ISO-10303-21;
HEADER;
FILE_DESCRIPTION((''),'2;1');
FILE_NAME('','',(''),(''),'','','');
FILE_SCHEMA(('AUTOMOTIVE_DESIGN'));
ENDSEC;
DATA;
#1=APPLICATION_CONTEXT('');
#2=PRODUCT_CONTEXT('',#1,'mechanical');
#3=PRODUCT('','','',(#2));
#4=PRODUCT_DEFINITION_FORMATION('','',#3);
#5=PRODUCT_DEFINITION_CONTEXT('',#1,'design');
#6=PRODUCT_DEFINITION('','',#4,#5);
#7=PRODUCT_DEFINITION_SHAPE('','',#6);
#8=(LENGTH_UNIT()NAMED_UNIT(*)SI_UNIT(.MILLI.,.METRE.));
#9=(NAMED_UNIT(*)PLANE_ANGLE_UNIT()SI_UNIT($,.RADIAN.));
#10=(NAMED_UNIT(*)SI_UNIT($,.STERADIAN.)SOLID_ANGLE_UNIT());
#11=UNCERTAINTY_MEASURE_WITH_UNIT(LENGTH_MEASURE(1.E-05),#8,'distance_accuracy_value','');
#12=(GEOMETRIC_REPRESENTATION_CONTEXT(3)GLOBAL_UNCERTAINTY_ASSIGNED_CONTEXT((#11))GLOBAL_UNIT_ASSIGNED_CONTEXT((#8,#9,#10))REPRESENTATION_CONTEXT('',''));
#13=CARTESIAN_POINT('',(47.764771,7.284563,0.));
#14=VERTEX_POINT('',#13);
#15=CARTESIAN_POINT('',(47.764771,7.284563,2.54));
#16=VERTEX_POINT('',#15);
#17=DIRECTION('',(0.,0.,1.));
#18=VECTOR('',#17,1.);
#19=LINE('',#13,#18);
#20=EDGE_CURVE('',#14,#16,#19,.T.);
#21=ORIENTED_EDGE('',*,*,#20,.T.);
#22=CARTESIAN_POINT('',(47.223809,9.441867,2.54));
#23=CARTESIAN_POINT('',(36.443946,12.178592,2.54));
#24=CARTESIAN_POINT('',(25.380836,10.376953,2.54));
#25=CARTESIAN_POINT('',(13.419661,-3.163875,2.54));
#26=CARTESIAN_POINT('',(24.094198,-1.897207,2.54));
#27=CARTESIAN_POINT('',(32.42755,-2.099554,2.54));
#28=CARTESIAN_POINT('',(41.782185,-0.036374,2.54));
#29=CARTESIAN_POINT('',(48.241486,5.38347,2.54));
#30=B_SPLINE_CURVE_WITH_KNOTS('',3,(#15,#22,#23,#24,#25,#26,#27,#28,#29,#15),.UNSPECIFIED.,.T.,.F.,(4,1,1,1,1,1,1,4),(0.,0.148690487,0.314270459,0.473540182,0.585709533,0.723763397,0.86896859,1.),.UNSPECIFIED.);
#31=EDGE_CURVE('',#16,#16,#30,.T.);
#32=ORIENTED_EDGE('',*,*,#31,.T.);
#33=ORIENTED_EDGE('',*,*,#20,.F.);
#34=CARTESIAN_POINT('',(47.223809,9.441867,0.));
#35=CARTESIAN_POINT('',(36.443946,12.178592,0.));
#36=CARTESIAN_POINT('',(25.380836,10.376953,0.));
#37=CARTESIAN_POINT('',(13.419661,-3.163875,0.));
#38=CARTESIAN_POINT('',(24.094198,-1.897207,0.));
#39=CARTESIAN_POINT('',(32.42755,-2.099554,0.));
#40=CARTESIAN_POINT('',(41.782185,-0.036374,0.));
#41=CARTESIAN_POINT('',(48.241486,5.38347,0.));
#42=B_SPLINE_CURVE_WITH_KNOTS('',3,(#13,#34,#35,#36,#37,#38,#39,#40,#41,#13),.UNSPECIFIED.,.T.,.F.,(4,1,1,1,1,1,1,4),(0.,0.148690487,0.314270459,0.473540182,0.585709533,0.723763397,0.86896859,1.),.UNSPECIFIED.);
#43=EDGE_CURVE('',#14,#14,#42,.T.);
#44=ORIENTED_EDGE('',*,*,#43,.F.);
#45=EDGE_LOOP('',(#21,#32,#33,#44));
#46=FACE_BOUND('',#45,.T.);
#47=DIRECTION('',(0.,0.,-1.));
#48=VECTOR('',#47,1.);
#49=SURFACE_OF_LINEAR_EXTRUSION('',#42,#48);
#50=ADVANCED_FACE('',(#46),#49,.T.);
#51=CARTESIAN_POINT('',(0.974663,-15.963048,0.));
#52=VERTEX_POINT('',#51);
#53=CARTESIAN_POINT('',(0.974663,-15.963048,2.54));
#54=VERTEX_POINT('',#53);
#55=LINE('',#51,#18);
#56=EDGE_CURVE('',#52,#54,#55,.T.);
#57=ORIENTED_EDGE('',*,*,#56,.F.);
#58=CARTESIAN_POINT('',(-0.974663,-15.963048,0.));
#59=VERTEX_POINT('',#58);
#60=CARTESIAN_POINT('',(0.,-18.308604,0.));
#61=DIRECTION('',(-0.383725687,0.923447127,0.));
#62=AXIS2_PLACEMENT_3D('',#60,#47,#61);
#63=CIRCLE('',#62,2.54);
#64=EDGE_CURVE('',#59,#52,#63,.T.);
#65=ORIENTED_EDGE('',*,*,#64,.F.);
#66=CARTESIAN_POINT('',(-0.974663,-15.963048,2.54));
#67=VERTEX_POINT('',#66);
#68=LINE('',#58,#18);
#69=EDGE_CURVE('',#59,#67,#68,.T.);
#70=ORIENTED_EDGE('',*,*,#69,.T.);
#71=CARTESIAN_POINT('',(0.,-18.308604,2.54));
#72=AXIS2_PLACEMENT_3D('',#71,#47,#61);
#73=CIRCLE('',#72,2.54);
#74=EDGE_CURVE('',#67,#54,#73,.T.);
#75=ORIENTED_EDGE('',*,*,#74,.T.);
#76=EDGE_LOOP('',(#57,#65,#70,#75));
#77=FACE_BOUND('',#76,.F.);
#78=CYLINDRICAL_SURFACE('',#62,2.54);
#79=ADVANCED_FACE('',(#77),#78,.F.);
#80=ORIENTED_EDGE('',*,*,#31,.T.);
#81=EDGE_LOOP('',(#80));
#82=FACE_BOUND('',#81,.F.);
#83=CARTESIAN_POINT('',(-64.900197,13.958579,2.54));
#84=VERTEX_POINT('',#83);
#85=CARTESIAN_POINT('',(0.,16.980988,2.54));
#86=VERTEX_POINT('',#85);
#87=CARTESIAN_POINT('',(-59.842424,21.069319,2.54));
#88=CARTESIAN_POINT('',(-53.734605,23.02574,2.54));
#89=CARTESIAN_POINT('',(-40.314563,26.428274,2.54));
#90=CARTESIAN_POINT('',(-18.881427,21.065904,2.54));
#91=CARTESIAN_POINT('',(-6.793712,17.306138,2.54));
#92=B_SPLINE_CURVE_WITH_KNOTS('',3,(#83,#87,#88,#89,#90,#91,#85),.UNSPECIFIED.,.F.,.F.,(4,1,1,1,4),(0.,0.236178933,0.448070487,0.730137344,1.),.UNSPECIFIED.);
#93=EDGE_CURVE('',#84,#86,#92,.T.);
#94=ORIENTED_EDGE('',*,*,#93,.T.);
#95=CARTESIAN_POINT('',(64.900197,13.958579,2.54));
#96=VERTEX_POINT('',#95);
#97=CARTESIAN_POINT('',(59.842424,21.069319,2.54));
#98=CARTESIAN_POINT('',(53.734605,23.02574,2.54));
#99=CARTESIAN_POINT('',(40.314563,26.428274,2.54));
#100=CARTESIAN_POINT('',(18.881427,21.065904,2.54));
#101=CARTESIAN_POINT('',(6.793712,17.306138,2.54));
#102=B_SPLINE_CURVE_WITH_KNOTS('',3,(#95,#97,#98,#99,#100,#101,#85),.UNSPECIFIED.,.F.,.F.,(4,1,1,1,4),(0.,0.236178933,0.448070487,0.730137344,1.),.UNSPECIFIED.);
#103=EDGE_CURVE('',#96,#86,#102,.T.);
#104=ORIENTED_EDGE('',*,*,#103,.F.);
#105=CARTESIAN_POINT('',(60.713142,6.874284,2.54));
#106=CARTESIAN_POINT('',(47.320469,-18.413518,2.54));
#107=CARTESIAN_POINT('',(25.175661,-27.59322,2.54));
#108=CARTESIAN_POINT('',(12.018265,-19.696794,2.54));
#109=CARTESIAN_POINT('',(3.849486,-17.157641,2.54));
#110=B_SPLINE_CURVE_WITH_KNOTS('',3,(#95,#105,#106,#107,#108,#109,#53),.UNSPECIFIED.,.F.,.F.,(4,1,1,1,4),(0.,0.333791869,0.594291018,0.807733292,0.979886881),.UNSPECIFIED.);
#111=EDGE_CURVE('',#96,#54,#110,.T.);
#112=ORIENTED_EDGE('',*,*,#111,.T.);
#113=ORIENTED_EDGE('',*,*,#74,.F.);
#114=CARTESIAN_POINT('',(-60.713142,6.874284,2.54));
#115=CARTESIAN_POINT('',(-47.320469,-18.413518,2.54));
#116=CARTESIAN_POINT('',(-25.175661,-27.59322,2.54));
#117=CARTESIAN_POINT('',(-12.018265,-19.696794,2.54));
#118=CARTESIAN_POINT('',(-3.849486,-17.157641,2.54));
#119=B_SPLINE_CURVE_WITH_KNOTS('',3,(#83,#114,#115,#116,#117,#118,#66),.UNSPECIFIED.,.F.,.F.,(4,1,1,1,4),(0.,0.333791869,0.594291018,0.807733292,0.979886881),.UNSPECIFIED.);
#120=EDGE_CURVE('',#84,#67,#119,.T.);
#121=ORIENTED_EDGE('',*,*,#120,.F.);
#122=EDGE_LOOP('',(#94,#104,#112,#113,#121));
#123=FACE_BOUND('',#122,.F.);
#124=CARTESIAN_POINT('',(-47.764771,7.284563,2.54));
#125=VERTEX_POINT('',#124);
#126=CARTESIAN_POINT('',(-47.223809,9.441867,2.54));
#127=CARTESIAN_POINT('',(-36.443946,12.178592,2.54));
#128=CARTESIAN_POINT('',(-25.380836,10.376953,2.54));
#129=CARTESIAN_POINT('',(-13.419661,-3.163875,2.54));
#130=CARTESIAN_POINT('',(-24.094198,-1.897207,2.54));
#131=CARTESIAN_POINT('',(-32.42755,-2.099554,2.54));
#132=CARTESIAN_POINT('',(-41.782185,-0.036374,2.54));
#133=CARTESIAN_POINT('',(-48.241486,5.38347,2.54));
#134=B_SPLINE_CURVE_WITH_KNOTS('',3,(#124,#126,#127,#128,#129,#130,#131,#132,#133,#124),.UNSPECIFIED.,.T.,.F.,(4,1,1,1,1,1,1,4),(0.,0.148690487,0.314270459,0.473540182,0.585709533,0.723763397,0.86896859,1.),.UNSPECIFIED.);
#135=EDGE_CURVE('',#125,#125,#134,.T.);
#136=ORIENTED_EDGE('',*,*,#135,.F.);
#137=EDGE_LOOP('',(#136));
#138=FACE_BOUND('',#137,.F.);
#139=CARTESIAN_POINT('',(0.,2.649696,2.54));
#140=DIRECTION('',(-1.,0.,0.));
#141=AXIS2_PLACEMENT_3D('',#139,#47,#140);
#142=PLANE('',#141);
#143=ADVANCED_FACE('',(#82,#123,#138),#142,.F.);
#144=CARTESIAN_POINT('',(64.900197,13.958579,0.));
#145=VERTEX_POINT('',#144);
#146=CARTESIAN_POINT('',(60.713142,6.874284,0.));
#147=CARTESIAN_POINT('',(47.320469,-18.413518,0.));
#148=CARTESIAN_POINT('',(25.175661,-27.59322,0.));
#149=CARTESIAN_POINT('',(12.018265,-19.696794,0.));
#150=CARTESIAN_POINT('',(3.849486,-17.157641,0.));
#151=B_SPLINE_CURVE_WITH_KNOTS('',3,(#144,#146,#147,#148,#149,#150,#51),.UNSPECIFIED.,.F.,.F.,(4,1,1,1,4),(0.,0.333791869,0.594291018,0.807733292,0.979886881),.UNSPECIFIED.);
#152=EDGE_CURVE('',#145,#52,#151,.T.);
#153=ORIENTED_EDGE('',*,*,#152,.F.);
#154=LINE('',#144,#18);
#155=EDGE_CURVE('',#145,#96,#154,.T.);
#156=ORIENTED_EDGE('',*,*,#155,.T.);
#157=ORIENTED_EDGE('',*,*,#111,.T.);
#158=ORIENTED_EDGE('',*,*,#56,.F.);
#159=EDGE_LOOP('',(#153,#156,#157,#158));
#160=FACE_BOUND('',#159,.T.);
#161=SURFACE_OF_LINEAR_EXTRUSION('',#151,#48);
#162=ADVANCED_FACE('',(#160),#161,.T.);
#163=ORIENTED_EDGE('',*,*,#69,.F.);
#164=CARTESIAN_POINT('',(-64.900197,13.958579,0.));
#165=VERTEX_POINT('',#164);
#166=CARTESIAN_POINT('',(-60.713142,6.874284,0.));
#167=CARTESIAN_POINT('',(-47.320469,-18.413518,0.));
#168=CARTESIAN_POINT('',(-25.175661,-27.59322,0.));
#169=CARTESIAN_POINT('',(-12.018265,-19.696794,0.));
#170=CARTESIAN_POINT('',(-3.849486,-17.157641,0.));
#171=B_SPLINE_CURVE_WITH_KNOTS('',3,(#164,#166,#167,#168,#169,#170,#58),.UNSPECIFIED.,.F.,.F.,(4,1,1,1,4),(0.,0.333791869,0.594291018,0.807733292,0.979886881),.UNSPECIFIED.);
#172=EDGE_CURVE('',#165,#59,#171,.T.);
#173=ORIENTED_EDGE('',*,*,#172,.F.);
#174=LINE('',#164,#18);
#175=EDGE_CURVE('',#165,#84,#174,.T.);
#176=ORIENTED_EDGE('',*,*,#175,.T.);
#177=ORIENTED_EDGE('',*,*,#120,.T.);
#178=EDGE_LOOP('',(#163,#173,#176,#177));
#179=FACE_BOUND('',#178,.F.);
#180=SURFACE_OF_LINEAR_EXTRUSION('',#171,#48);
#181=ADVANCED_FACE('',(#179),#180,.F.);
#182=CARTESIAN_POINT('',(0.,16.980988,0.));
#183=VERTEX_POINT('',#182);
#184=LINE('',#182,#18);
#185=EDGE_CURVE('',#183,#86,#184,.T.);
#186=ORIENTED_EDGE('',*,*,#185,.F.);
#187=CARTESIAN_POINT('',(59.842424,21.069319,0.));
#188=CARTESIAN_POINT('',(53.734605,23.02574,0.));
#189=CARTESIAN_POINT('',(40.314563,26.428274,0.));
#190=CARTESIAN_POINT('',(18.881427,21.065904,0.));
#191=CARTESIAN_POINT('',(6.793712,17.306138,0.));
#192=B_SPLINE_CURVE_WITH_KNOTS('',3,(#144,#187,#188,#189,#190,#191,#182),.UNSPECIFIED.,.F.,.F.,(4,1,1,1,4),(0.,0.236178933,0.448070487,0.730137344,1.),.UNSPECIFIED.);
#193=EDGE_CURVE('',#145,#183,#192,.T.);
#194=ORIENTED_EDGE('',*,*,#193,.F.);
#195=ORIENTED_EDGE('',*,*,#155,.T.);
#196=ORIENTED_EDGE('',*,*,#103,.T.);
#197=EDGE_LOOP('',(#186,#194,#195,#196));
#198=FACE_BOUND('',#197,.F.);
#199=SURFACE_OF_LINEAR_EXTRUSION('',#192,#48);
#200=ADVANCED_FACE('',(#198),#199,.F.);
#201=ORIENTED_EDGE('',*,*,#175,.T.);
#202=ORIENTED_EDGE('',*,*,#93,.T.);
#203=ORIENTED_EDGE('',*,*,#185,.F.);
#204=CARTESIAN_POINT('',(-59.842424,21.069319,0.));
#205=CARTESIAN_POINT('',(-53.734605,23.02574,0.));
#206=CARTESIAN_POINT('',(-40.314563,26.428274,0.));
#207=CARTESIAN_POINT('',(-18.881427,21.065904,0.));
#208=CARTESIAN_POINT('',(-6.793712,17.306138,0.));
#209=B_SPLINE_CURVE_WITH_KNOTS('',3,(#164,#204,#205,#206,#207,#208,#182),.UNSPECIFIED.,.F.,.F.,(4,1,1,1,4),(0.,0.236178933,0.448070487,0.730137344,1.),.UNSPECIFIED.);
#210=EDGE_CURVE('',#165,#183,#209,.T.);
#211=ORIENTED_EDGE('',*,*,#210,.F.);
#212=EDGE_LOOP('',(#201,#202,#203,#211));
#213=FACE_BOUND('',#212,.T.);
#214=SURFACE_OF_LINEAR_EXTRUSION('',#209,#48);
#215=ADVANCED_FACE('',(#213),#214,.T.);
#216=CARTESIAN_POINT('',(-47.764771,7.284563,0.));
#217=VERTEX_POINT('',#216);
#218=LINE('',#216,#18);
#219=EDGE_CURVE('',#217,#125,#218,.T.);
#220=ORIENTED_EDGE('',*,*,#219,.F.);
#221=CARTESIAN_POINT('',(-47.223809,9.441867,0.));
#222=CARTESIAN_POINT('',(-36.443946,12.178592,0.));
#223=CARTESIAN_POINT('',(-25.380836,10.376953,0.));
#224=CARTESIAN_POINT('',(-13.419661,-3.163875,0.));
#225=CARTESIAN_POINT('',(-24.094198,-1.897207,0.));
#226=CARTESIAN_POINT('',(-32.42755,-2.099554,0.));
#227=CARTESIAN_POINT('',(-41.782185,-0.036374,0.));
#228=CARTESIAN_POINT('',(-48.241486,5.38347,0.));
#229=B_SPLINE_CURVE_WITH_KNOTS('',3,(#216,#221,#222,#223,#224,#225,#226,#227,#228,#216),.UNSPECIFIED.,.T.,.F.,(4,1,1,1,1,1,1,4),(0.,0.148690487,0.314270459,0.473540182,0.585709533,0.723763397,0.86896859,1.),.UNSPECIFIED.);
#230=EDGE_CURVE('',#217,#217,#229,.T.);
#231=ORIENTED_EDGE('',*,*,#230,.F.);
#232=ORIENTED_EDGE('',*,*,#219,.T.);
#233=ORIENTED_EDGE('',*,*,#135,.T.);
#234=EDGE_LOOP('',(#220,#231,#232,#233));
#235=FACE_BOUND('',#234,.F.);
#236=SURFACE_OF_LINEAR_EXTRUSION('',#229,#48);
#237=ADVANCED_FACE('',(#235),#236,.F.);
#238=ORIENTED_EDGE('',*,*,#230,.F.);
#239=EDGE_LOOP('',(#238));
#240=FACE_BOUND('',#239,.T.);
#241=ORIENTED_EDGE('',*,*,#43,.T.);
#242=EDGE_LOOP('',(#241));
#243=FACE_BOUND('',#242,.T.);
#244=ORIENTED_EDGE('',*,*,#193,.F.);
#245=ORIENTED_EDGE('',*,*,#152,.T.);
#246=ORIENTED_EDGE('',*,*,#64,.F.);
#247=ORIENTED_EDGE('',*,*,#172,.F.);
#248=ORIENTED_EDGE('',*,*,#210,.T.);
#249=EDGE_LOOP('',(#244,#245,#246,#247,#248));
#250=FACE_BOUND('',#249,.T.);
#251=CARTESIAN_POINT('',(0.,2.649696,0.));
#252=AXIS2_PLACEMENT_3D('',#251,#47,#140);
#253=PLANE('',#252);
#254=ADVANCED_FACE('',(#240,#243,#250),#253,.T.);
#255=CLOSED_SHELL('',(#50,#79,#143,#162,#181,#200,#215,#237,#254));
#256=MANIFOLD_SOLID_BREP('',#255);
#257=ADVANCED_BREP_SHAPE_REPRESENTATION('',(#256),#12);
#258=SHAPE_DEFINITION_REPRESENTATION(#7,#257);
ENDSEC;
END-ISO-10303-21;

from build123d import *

# Parameters (mm, degrees)
F1_DEPTH = 2.54


with BuildPart() as f1:
    # F0 (on Top) → F1 (new body)
    with BuildSketch(Plane.XY):
        with BuildLine():
            add(Edge.make_bspline(
                [(-64.9001970887, 13.9585789293), (-59.8424235445, 21.0693185661), (-53.7346048637, 23.0257404726), (-40.3145630415, 26.4282743713), (-18.8814266067, 21.0659037421), (-6.7937120551, 17.3061378378), (0, 16.9809884228)],
                knots=[0, 0, 0, 0, 0.236178933, 0.4480704868, 0.7301373435, 1, 1, 1, 1], degree=3))
            add(Edge.make_bspline(
                [(-64.9001970887, 13.9585789293), (-60.7131418232, 6.874283925), (-47.3204689226, -18.4135182685), (-25.1756609398, -27.5932197086), (-12.0182650538, -19.6967941746), (-3.849485648, -17.1576407451), (-0.9746632453, -15.96304804)],
                knots=[0, 0, 0, 0, 0.3337918688, 0.5942910183, 0.8077332916, 0.9798868813, 0.9798868813, 0.9798868813, 0.9798868813], degree=3))
            add(Edge.make_bspline(
                [(-0.9746632453, -15.96304804), (-0.6387908173, -15.8234808959), (-0.3134590553, -15.6830816698), (0, -15.541062241)],
                knots=[0.9798868813, 0.9798868813, 0.9798868813, 0.9798868813, 1, 1, 1, 1], degree=3))
            add(Edge.make_bspline(
                [(0.9746632453, -15.96304804), (0.6387908173, -15.8234808959), (0.3134590553, -15.6830816698), (0, -15.541062241)],
                knots=[0.9798868813, 0.9798868813, 0.9798868813, 0.9798868813, 1, 1, 1, 1], degree=3))
            add(Edge.make_bspline(
                [(64.9001970887, 13.9585789293), (60.7131418232, 6.874283925), (47.3204689226, -18.4135182685), (25.1756609398, -27.5932197086), (12.0182650538, -19.6967941746), (3.849485648, -17.1576407451), (0.9746632453, -15.96304804)],
                knots=[0, 0, 0, 0, 0.3337918688, 0.5942910183, 0.8077332916, 0.9798868813, 0.9798868813, 0.9798868813, 0.9798868813], degree=3))
            add(Edge.make_bspline(
                [(64.9001970887, 13.9585789293), (59.8424235445, 21.0693185661), (53.7346048637, 23.0257404726), (40.3145630415, 26.4282743713), (18.8814266067, 21.0659037421), (6.7937120551, 17.3061378378), (0, 16.9809884228)],
                knots=[0, 0, 0, 0, 0.236178933, 0.4480704868, 0.7301373435, 1, 1, 1, 1], degree=3))
        make_face()
        with BuildLine():
            add(Edge.make_bspline(
                [(-47.7647706866, 7.2845630348), (-47.2238090705, 9.4418665585), (-36.443945915, 12.1785918421), (-25.3808361667, 10.3769526965), (-13.4196607123, -3.1638753962), (-24.0941982433, -1.8972065882), (-32.4275500412, -2.0995535899), (-41.7821849404, -0.0363742902), (-48.2414855386, 5.383469502), (-47.7647706866, 7.2845630348)],
                knots=[0, 0, 0, 0, 0.1486904868, 0.3142704588, 0.4735401823, 0.5857095329, 0.7237633974, 0.8689685898, 1, 1, 1, 1], degree=3))
        make_face(mode=Mode.SUBTRACT)
        with BuildLine():
            add(Edge.make_bspline(
                [(47.7647706866, 7.2845630348), (47.2238090705, 9.4418665585), (36.443945915, 12.1785918421), (25.3808361667, 10.3769526965), (13.4196607123, -3.1638753962), (24.0941982433, -1.8972065882), (32.4275500412, -2.0995535899), (41.7821849404, -0.0363742902), (48.2414855386, 5.383469502), (47.7647706866, 7.2845630348)],
                knots=[0, 0, 0, 0, 0.1486904868, 0.3142704588, 0.4735401823, 0.5857095329, 0.7237633974, 0.8689685898, 1, 1, 1, 1], degree=3))
        make_face(mode=Mode.SUBTRACT)
        with BuildLine():
            add(Edge.make_bspline(
                [(-0.9746632453, -15.96304804), (-0.6387908173, -15.8234808959), (-0.3134590553, -15.6830816698), (0, -15.541062241)],
                knots=[0.9798868813, 0.9798868813, 0.9798868813, 0.9798868813, 1, 1, 1, 1], degree=3))
            ThreePointArc((-0.9746632453, -15.96304804), (0, -15.7686037435), (0.9746632453, -15.96304804))
            add(Edge.make_bspline(
                [(0.9746632453, -15.96304804), (0.6387908173, -15.8234808959), (0.3134590553, -15.6830816698), (0, -15.541062241)],
                knots=[0.9798868813, 0.9798868813, 0.9798868813, 0.9798868813, 1, 1, 1, 1], degree=3))
        make_face()
    extrude(amount=F1_DEPTH)


solid = f1.part
